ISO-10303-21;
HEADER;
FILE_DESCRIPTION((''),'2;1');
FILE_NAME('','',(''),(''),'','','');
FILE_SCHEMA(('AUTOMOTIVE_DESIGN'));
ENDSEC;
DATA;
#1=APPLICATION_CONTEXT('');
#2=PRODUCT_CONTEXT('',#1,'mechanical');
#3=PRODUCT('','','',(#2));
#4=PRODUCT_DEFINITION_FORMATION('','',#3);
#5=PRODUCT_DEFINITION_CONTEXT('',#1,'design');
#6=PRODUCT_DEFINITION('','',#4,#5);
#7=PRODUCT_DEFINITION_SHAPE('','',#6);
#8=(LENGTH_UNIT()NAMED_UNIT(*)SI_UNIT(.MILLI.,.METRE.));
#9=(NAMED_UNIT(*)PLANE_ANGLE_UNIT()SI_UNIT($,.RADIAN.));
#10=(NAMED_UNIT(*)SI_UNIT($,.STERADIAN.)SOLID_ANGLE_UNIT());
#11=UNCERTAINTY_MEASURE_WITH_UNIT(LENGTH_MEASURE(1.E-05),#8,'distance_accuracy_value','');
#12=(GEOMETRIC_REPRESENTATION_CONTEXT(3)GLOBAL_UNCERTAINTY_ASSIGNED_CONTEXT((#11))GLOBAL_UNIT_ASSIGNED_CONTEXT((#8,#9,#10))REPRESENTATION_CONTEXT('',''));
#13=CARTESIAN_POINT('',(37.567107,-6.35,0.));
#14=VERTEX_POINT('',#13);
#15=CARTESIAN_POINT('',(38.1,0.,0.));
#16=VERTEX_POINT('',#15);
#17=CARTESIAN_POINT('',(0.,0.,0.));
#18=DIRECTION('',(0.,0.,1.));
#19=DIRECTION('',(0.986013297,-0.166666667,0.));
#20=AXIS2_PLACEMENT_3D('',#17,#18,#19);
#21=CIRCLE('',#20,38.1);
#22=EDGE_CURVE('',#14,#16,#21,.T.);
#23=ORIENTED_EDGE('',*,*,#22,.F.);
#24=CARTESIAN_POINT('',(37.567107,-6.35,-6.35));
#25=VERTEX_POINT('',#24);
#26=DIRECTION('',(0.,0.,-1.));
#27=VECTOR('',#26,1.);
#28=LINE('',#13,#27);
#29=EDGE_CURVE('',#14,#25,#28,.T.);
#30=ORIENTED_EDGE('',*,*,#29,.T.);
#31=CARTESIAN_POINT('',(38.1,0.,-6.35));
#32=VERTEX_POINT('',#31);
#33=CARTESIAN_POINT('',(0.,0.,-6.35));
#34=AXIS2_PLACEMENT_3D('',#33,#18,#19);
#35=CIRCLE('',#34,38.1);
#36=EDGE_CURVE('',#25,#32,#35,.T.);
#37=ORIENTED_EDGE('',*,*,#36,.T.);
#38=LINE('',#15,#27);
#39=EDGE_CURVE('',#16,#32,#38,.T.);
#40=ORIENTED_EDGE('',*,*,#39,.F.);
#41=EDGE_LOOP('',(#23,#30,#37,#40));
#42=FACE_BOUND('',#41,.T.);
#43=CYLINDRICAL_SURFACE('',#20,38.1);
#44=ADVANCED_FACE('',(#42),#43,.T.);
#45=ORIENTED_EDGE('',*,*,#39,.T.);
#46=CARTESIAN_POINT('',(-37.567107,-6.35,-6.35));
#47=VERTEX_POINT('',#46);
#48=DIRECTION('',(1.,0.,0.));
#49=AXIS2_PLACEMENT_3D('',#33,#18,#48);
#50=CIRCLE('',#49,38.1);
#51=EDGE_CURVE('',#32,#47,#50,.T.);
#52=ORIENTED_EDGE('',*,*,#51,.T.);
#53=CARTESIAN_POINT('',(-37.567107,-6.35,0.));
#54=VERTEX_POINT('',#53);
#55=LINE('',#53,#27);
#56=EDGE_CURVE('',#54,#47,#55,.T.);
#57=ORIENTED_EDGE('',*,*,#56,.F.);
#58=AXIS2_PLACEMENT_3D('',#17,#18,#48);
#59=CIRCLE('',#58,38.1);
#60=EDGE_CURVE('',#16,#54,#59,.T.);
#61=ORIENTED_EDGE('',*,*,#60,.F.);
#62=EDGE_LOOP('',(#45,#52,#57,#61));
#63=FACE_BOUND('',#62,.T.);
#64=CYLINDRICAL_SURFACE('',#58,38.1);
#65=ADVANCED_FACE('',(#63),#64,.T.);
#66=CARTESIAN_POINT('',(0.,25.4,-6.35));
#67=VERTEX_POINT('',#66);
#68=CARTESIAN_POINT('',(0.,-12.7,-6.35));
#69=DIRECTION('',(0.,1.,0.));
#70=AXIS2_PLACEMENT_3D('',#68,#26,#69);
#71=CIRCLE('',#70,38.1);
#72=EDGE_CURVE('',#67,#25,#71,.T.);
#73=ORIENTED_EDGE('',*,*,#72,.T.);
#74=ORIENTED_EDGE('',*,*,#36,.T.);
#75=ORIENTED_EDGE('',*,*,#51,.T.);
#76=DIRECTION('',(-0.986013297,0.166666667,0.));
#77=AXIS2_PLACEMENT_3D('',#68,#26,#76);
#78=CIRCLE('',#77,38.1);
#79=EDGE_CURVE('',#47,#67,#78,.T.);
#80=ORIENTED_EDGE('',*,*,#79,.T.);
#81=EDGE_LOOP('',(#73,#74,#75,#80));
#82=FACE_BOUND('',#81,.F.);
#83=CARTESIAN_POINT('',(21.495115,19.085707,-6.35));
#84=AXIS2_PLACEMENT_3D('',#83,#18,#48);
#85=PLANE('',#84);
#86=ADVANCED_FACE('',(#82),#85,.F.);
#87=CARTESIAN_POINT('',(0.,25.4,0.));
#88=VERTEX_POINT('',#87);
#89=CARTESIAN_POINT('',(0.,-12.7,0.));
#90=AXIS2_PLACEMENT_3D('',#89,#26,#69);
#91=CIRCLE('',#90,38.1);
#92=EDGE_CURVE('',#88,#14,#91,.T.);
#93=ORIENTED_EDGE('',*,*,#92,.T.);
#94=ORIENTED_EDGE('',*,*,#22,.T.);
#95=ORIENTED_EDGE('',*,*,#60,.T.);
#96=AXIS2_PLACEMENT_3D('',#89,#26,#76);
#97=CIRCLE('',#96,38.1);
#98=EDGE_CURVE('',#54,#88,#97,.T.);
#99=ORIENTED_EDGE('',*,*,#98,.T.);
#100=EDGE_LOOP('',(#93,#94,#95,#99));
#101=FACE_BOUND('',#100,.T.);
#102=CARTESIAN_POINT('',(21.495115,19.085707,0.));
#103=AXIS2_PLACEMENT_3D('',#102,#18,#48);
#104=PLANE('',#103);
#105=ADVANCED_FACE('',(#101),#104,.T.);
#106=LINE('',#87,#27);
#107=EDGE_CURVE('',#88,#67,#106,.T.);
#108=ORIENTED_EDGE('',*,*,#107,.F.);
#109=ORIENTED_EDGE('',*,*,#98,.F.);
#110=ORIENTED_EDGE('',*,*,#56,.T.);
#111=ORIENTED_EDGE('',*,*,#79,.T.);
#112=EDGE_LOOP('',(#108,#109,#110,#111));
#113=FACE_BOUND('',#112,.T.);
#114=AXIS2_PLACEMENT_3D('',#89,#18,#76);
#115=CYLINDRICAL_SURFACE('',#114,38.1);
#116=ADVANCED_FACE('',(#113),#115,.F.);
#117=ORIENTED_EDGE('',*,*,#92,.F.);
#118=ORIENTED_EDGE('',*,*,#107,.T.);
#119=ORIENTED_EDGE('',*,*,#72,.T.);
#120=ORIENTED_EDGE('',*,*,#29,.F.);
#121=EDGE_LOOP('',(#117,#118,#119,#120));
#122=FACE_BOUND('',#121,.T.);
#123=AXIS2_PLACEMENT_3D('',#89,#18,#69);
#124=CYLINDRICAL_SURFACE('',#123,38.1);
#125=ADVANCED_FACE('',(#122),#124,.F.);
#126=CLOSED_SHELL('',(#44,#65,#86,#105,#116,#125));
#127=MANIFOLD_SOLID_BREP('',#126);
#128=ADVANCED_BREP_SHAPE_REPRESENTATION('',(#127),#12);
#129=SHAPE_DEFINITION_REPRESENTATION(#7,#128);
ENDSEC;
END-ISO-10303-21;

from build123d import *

# Parameters (mm, degrees)
F1_DEPTH = 6.35


with BuildPart() as f1:
    # F0 (on Top) → F1 (new body)
    with BuildSketch(Plane.XY):
        with BuildLine():
            ThreePointArc((37.5671066227, -6.35), (37.9665429182, -3.1861605167), (38.1, 0))
            ThreePointArc((38.1, 0), (26.9407683632, 26.9407683632), (0, 38.1))
            Line((0, 38.1), (0, 25.4))
            ThreePointArc((0, 25.4), (24.5934442484, 16.399355663), (37.5671066227, -6.35))
        make_face()
        with BuildLine():
            Line((0, 25.4), (0, 38.1))
            ThreePointArc((0, 38.1), (-29.099355663, 24.5934442484), (-37.5671066227, -6.35))
            ThreePointArc((-37.5671066227, -6.35), (-24.5934442484, 16.399355663), (0, 25.4))
        make_face()
    extrude(amount=-F1_DEPTH)


solid = f1.part
